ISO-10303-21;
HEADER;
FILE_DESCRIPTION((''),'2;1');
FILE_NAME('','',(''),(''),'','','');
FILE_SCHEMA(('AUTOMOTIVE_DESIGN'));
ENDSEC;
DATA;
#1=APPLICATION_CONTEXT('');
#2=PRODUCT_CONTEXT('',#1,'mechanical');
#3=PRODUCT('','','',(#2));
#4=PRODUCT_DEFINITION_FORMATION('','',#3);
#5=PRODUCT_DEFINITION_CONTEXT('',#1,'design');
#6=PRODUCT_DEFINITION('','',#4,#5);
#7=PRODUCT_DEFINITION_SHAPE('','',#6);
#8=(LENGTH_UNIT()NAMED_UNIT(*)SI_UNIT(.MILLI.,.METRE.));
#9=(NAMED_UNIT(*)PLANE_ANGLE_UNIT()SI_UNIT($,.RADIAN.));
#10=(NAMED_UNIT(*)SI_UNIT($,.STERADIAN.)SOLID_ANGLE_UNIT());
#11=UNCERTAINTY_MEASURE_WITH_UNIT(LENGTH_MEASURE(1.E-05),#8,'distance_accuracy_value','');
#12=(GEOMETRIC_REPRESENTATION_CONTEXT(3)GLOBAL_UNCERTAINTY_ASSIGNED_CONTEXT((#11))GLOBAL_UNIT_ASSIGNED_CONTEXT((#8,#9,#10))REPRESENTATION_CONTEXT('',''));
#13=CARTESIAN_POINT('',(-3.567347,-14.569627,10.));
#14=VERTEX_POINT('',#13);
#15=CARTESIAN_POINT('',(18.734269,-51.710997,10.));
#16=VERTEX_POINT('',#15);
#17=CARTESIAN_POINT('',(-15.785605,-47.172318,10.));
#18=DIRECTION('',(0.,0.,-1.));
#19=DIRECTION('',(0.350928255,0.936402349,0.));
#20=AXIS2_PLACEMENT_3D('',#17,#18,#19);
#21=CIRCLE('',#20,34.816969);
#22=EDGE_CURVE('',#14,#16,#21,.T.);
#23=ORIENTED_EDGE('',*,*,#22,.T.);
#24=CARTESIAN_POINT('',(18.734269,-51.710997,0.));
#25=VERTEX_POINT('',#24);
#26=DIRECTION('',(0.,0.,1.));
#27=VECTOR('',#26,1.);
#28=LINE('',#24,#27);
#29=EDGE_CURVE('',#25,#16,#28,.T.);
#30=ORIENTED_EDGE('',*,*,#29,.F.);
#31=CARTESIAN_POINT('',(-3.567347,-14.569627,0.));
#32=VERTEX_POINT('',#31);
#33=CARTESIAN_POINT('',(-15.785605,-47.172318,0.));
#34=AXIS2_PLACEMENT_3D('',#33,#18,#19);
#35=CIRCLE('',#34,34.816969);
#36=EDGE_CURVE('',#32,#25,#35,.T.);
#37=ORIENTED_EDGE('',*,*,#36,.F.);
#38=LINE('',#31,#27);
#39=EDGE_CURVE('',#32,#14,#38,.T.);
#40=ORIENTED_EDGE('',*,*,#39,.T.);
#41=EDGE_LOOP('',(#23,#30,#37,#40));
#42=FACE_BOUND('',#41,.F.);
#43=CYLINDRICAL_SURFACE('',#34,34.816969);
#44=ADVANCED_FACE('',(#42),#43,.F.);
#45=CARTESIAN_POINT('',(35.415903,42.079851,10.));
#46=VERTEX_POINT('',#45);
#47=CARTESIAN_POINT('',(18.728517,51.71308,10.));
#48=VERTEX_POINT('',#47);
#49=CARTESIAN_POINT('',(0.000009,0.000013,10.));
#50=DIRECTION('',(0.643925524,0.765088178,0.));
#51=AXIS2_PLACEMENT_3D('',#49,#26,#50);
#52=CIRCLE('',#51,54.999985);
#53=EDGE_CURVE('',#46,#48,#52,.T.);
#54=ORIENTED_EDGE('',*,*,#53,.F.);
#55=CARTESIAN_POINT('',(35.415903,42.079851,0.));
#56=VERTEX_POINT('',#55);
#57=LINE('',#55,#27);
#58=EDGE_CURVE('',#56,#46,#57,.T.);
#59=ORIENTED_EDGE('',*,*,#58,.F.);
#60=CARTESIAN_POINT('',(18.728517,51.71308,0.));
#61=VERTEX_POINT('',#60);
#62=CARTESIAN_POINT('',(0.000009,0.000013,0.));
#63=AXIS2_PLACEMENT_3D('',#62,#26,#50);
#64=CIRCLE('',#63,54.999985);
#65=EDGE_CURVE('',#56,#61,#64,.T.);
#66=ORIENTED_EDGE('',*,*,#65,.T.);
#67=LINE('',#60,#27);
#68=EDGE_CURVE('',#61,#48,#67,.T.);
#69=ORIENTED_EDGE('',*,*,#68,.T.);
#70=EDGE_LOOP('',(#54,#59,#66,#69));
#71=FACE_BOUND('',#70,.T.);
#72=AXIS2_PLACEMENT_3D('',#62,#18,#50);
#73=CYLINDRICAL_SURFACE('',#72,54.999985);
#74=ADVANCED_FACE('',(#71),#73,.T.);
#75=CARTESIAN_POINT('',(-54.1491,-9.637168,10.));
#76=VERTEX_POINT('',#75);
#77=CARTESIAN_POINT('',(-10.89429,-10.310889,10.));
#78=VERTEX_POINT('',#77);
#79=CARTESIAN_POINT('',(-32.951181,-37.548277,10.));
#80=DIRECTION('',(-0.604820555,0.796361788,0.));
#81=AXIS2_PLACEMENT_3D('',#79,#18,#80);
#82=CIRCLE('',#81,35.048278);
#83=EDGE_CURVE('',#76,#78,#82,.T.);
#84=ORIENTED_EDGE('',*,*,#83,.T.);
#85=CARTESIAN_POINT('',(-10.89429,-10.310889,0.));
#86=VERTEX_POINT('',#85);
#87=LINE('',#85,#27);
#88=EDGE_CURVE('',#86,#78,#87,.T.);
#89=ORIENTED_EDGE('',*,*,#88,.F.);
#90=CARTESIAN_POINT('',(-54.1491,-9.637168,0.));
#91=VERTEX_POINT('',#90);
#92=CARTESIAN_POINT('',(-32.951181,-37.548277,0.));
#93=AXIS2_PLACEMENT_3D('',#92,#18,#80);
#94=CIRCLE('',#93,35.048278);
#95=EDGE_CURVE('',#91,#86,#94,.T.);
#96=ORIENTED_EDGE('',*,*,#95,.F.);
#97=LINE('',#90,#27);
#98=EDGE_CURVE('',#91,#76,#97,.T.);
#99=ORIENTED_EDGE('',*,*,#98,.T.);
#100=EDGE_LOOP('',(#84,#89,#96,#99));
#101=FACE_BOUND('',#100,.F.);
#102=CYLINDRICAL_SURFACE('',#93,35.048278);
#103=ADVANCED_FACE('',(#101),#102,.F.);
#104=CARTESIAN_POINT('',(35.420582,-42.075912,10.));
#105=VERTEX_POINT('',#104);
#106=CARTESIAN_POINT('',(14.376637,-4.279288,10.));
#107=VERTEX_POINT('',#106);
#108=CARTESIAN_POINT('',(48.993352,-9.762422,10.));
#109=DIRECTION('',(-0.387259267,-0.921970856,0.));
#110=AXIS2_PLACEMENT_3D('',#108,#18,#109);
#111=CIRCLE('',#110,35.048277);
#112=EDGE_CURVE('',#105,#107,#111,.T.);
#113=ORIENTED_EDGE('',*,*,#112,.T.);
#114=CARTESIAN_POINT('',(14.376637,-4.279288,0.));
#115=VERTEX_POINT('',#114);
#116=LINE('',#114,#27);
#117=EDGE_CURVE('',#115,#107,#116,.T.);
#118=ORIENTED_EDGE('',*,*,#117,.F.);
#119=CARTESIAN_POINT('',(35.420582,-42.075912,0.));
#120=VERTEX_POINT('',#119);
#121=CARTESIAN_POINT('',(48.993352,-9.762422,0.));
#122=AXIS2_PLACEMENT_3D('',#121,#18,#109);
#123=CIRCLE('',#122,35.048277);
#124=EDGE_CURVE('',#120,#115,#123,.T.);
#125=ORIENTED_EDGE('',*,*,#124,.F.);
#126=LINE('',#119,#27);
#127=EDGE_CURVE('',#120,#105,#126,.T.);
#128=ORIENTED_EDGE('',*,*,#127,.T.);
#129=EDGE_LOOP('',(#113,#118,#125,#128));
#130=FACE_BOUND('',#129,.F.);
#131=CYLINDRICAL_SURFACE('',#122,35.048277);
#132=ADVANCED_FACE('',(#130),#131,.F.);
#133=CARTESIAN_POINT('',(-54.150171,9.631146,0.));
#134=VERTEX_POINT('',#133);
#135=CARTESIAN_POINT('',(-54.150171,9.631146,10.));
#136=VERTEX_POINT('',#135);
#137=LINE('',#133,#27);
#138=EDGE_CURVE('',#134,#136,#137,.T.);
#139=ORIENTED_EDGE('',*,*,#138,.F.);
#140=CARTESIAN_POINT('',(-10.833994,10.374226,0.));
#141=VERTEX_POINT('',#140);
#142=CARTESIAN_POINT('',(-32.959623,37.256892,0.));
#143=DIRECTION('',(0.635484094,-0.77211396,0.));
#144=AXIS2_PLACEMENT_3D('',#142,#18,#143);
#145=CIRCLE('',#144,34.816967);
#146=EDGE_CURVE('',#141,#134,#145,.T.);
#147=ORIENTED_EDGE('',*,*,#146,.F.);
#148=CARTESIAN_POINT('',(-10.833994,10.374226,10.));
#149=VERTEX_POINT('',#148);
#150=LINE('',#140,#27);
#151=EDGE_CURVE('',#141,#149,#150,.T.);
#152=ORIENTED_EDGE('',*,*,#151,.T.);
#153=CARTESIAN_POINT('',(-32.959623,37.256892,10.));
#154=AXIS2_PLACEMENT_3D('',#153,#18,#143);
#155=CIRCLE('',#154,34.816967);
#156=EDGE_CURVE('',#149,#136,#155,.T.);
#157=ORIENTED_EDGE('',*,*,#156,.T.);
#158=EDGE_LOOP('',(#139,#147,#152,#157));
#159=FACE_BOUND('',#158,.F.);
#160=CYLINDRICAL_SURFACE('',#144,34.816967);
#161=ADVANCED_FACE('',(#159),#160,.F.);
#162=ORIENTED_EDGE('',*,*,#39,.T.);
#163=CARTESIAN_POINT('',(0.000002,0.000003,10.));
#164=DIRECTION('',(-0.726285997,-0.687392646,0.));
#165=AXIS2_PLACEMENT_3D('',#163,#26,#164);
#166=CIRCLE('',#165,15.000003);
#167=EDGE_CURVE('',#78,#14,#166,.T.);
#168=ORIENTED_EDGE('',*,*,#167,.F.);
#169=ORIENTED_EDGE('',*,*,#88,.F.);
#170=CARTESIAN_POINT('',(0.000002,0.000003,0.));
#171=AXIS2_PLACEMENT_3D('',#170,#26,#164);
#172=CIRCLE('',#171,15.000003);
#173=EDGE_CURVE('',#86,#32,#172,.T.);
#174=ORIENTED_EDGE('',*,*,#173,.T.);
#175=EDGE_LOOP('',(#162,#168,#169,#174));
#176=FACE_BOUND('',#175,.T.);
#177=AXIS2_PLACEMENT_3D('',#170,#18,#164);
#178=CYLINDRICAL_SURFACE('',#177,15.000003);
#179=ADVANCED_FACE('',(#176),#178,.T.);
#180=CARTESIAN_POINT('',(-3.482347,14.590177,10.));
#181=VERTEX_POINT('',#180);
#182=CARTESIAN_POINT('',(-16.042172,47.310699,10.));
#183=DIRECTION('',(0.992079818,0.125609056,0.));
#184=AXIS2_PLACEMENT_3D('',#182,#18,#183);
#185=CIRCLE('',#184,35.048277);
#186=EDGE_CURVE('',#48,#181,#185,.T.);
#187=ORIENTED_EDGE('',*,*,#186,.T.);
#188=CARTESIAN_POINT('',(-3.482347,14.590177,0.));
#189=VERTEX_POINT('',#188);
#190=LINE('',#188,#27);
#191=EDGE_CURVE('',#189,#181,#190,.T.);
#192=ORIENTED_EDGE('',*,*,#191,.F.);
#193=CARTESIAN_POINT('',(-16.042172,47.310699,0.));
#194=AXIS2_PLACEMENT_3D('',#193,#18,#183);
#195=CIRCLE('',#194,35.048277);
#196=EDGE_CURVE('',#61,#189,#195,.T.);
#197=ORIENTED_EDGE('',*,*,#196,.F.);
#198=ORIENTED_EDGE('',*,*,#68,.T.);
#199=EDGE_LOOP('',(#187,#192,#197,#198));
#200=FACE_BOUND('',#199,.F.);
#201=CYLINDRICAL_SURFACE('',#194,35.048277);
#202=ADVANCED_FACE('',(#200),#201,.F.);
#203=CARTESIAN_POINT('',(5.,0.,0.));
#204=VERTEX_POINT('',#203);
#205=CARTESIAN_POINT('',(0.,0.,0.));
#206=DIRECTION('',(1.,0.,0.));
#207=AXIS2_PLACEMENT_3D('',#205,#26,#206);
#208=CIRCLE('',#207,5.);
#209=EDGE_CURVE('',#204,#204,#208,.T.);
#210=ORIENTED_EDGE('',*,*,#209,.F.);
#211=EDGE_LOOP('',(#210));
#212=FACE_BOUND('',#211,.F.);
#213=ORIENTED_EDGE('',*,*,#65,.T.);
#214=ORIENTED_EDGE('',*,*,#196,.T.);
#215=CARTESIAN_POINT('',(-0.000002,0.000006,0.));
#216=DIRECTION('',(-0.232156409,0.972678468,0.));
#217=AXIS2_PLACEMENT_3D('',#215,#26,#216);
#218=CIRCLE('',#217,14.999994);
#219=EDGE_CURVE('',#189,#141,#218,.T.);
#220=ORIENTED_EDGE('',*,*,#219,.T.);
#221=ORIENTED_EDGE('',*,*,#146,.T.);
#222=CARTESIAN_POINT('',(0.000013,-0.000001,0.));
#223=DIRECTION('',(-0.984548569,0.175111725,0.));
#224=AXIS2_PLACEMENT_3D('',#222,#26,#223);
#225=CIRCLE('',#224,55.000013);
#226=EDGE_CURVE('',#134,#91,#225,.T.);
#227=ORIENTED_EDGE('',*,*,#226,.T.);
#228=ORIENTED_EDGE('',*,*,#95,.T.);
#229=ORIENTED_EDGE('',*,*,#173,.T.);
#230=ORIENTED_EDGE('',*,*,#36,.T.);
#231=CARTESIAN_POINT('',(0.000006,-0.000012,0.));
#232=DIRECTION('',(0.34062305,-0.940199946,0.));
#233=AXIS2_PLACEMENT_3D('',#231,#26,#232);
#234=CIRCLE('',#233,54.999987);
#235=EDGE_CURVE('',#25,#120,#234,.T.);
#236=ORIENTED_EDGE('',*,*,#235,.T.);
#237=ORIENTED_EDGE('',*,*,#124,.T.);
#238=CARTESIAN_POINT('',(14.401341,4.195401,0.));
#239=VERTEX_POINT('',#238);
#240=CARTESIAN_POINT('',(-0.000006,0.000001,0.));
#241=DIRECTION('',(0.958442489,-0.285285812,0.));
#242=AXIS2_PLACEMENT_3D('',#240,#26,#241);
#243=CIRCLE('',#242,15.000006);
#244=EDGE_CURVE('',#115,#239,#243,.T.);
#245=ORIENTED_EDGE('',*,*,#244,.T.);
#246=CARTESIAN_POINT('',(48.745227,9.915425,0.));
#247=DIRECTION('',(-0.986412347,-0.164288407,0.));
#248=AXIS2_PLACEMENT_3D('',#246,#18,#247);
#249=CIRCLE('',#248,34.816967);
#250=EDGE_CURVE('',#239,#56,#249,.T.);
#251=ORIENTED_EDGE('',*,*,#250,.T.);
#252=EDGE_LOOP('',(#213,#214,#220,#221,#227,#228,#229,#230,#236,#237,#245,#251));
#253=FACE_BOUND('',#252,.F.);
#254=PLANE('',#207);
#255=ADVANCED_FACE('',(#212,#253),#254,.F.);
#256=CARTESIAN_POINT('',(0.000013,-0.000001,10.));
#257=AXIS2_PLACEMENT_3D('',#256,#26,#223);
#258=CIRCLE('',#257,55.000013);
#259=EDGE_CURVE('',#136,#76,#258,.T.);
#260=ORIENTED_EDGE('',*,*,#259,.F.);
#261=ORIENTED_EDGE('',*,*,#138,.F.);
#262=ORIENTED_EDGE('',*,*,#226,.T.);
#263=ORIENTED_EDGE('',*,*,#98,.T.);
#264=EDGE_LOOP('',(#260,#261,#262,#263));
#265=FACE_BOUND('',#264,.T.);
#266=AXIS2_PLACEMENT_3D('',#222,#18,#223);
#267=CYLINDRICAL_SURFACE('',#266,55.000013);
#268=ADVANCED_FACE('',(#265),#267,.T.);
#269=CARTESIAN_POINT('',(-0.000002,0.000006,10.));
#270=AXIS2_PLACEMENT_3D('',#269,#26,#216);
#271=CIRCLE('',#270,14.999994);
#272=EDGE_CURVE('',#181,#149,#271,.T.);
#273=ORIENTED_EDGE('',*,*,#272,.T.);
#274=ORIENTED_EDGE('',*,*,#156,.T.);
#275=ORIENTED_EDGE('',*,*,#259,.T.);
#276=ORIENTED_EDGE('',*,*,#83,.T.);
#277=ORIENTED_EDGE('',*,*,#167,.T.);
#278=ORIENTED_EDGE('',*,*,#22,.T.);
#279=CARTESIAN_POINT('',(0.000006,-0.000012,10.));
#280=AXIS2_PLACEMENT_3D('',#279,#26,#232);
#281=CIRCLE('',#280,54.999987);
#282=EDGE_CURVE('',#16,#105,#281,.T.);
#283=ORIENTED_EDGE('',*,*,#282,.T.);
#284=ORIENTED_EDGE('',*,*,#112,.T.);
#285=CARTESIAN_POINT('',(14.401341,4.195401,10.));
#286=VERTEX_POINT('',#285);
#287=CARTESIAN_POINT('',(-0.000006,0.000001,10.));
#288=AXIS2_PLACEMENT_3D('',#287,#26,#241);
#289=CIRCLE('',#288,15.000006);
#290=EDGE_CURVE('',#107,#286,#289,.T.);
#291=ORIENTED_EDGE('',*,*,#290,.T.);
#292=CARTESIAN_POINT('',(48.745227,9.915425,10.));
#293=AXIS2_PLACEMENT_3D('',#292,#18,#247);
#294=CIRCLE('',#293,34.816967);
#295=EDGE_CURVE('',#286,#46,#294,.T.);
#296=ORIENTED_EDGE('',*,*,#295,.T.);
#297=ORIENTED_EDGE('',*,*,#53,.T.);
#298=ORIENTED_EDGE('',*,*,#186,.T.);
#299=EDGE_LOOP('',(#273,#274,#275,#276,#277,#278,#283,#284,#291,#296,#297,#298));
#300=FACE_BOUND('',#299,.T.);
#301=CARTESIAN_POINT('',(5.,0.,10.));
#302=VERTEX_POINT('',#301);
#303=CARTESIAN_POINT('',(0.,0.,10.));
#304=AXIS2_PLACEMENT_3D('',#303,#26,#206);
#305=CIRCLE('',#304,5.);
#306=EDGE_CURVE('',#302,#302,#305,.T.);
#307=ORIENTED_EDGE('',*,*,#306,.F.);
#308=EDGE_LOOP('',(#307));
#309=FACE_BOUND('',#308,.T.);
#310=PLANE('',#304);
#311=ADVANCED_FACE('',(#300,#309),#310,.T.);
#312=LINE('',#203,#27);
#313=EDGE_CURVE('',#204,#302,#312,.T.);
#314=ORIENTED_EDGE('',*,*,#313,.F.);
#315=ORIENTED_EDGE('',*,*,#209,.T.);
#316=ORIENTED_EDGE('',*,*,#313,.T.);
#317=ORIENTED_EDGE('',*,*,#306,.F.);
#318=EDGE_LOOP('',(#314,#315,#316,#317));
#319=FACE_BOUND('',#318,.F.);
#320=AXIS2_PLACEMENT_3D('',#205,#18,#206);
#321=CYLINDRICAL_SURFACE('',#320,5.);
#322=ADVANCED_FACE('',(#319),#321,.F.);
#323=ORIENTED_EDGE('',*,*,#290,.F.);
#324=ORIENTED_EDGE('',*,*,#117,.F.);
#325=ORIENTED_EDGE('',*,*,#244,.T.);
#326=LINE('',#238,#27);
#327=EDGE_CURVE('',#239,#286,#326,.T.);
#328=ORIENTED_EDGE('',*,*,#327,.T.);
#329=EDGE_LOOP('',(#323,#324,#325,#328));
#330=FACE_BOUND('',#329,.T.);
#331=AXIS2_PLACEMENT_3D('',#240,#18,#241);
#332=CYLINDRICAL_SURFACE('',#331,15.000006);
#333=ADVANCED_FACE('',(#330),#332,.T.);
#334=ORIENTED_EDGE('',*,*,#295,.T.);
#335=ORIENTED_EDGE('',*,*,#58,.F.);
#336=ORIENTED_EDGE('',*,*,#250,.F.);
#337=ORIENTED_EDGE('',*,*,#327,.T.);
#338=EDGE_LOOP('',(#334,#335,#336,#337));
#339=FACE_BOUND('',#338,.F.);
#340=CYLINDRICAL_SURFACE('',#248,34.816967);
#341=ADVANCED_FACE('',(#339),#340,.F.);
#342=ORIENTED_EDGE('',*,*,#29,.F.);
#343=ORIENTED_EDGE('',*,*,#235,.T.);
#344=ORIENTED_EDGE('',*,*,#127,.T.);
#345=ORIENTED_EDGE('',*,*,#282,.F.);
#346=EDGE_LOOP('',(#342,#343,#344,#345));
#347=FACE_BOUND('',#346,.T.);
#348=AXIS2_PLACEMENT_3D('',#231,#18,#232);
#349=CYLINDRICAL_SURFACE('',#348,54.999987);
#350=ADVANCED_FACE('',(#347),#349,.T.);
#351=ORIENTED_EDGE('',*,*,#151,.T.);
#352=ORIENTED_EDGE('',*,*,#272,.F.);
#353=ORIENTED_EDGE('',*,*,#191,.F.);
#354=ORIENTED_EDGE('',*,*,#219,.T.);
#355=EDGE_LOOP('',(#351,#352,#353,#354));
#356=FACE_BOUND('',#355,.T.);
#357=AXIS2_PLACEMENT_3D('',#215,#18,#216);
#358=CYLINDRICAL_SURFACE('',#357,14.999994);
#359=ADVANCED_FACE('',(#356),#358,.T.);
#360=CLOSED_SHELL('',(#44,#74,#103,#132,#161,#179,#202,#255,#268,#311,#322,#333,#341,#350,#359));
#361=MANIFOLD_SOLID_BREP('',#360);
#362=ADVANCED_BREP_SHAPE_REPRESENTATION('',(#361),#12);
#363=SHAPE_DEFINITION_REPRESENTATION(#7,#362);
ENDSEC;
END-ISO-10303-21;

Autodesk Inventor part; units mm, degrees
ref_plane "YZ Plane" through (0, 0, 0) normal (1, 0, 0) x (0, 1, 0)
ref_plane "XZ Plane" through (0, 0, 0) normal (0, 1, 0) x (-1, 0, 0)
ref_plane "XY Plane" through (0, 0, 0) normal (0, 0, 1) x (1, 0, 0)
sketch "Sketch1" plane through (0, 0, 0) normal (0, 0, 1) x (1, 0, 0)
  circle A0 centre (0, 0) radius 15
  circle A1 centre (0, 0) radius 55
  line L0 (15, 0) -> (55, 0) construction
  circle A2 centre (35, 0) radius 20 construction
  circle A3 centre (-17.5, 30.310889) radius 20 construction
  circle A4 centre (-17.5, -30.310889) radius 20 construction
  line L1 (0, 0) -> (-10.833994, 10.374226)
  line L2 (0, 0) -> (27.5, -47.631397)
  line L3 (0, 0) -> (-55, 0) construction
  line L4 (0, 0) -> (27.5, 47.631397)
  line L5 (17.5, 30.310889) -> (27.5, 47.631397) construction
  line L6 (-1.432373, 18.147489) -> (18.567627, 52.788505) construction
  line L7 (18.567627, 52.788505) -> (36.432373, 42.47429) construction
  line L8 (36.432373, 42.47429) -> (16.432373, 7.833273) construction
  line L9 (16.432373, 7.833273) -> (-1.432373, 18.147489) construction
  line L10 (-1.432373, 18.147489) -> (36.432373, 42.47429) construction
  line L11 (18.567627, 52.788505) -> (16.432373, 7.833273) construction
  line L12 (-1.48905, -18.180212) -> (18.51095, -52.821228) construction
  line L13 (18.51095, -52.821228) -> (36.48905, -42.441567) construction
  line L14 (36.48905, -42.441567) -> (16.48905, -7.80055) construction
  line L15 (16.48905, -7.80055) -> (-1.48905, -18.180212) construction
  line L16 (-1.48905, -18.180212) -> (36.48905, -42.441567) construction
  line L17 (18.51095, -52.821228) -> (16.48905, -7.80055) construction
  line L18 (-55.008072, 10.310889) -> (-15, 10.310889) construction
  line L19 (-15, 10.310889) -> (-15, -10.310889) construction
  line L20 (-15, -10.310889) -> (-55.008072, -10.310889) construction
  line L21 (-55.008072, -10.310889) -> (-55.008072, 10.310889)
  line L22 (-55.008072, 10.310889) -> (-15, -10.310889) construction
  line L23 (-15, 10.310889) -> (-55.008072, -10.310889) construction
  line L24 (-39.117828, -2.5) -> (-30.890244, -2.5) construction
  line L25 (-30.890244, -2.5) -> (-30.890244, 2.5) construction
  line L26 (-30.890244, 2.5) -> (-39.117828, 2.5) construction
  line L27 (-39.117828, 2.5) -> (-39.117828, -2.5) construction
  line L28 (-39.117828, -2.5) -> (-30.890244, 2.5) construction
  line L29 (-30.890244, -2.5) -> (-39.117828, 2.5) construction
  arc A5 (-10.89429, -10.310889) -> (-55.008072, -10.310889) centre (-32.951181, -37.548278) ccw
  line L30 (-55.008072, 10.310889) -> (-55.008072, -10.310889) construction
  arc A6 (-55.008072, 10.310889) -> (-10.833994, 10.374226) centre (-32.959623, 37.256893) ccw
  line L31 (-55.008072, 10.310889) -> (-55.008072, -10.310889) construction
  arc A7 (18.574544, -52.793832) -> (-3.567347, -14.569627) centre (-15.785604, -47.172317) ccw
  line L32 (36.433528, -42.482943) -> (18.574544, -52.793832)
  arc A8 (14.376637, -4.279288) -> (36.433528, -42.482943) centre (48.993353, -9.762421) ccw
  circle A9 centre (0, 0) radius 15
  arc A10 (36.433528, 42.482943) -> (14.401341, 4.195401) centre (48.745227, 9.915425) ccw
  line L33 (18.574544, 52.793832) -> (36.433528, 42.482943)
  arc A11 (-3.482347, 14.590177) -> (18.574544, 52.793832) centre (-16.042172, 47.310699) ccw
  circle A12 centre (0, 0) radius 15
  circle A13 centre (0, 0) radius 5
  point P0 (-27.5, 47.631397)
  point P1 (-27.5, -47.631397)
  point P2 (17.5, -30.310889)
  point P3 (-35.004036, 0)
  point P4 (-7.5, 12.990381)
  point P5 (-7.5, -12.990381)
  point P6 (-54.150171, 9.631146)
  point P7 (-54.1491, -9.637168)
  point P8 (-3.567347, -14.569627)
  point P9 (18.734269, -51.710997)
  point P10 (35.420582, -42.075912)
  point P11 (14.376637, -4.279288)
  point P12 (14.401341, 4.195401)
  point P13 (35.415903, 42.079851)
  point P14 (18.728517, 51.71308)
  point P15 (-3.482347, 14.590177)
  dimension "d0" = 30
  dimension "d1" = 40
  dimension "d4" = 360
  dimension "d6" = 5
  dimension "d9" = 360
  dimension "d11" = 10
sketch "Sketch1 outline for Extrusion1" plane through (0, 0, 0) normal (0, 0, 1) x (1, 0, 0)
  arc A0 (-10.833994, 10.374226) -> (-54.150171, 9.631146) centre (-32.959623, 37.256893) cw
  arc A1 (-3.482347, 14.590177) -> (-10.833994, 10.374226) centre (0, 0) ccw
  arc A2 (-54.150171, 9.631146) -> (-54.1491, -9.637168) centre (0, 0) ccw
  arc A3 (18.728517, 51.71308) -> (-3.482347, 14.590177) centre (-16.042172, 47.310699) cw
  arc A4 (-54.1491, -9.637168) -> (-10.89429, -10.310889) centre (-32.951181, -37.548278) cw
  arc A5 (35.415903, 42.079851) -> (18.728517, 51.71308) centre (0, 0) ccw
  arc A6 (-10.89429, -10.310889) -> (-3.567347, -14.569627) centre (0, 0) ccw
  arc A7 (14.401341, 4.195401) -> (35.415903, 42.079851) centre (48.745227, 9.915425) cw
  arc A8 (-3.567347, -14.569627) -> (18.734269, -51.710997) centre (-15.785604, -47.172317) cw
  arc A9 (14.376637, -4.279288) -> (14.401341, 4.195401) centre (0, 0) ccw
  arc A10 (18.734269, -51.710997) -> (35.420582, -42.075912) centre (0, 0) ccw
  arc A11 (35.420582, -42.075912) -> (14.376637, -4.279288) centre (48.993353, -9.762421) cw
  circle A12 centre (0, 0) radius 5
extrude "Extrusion1" add sketch "Sketch1 outline for Extrusion1" along normal blind 10
properties part number "Combine mk1"
